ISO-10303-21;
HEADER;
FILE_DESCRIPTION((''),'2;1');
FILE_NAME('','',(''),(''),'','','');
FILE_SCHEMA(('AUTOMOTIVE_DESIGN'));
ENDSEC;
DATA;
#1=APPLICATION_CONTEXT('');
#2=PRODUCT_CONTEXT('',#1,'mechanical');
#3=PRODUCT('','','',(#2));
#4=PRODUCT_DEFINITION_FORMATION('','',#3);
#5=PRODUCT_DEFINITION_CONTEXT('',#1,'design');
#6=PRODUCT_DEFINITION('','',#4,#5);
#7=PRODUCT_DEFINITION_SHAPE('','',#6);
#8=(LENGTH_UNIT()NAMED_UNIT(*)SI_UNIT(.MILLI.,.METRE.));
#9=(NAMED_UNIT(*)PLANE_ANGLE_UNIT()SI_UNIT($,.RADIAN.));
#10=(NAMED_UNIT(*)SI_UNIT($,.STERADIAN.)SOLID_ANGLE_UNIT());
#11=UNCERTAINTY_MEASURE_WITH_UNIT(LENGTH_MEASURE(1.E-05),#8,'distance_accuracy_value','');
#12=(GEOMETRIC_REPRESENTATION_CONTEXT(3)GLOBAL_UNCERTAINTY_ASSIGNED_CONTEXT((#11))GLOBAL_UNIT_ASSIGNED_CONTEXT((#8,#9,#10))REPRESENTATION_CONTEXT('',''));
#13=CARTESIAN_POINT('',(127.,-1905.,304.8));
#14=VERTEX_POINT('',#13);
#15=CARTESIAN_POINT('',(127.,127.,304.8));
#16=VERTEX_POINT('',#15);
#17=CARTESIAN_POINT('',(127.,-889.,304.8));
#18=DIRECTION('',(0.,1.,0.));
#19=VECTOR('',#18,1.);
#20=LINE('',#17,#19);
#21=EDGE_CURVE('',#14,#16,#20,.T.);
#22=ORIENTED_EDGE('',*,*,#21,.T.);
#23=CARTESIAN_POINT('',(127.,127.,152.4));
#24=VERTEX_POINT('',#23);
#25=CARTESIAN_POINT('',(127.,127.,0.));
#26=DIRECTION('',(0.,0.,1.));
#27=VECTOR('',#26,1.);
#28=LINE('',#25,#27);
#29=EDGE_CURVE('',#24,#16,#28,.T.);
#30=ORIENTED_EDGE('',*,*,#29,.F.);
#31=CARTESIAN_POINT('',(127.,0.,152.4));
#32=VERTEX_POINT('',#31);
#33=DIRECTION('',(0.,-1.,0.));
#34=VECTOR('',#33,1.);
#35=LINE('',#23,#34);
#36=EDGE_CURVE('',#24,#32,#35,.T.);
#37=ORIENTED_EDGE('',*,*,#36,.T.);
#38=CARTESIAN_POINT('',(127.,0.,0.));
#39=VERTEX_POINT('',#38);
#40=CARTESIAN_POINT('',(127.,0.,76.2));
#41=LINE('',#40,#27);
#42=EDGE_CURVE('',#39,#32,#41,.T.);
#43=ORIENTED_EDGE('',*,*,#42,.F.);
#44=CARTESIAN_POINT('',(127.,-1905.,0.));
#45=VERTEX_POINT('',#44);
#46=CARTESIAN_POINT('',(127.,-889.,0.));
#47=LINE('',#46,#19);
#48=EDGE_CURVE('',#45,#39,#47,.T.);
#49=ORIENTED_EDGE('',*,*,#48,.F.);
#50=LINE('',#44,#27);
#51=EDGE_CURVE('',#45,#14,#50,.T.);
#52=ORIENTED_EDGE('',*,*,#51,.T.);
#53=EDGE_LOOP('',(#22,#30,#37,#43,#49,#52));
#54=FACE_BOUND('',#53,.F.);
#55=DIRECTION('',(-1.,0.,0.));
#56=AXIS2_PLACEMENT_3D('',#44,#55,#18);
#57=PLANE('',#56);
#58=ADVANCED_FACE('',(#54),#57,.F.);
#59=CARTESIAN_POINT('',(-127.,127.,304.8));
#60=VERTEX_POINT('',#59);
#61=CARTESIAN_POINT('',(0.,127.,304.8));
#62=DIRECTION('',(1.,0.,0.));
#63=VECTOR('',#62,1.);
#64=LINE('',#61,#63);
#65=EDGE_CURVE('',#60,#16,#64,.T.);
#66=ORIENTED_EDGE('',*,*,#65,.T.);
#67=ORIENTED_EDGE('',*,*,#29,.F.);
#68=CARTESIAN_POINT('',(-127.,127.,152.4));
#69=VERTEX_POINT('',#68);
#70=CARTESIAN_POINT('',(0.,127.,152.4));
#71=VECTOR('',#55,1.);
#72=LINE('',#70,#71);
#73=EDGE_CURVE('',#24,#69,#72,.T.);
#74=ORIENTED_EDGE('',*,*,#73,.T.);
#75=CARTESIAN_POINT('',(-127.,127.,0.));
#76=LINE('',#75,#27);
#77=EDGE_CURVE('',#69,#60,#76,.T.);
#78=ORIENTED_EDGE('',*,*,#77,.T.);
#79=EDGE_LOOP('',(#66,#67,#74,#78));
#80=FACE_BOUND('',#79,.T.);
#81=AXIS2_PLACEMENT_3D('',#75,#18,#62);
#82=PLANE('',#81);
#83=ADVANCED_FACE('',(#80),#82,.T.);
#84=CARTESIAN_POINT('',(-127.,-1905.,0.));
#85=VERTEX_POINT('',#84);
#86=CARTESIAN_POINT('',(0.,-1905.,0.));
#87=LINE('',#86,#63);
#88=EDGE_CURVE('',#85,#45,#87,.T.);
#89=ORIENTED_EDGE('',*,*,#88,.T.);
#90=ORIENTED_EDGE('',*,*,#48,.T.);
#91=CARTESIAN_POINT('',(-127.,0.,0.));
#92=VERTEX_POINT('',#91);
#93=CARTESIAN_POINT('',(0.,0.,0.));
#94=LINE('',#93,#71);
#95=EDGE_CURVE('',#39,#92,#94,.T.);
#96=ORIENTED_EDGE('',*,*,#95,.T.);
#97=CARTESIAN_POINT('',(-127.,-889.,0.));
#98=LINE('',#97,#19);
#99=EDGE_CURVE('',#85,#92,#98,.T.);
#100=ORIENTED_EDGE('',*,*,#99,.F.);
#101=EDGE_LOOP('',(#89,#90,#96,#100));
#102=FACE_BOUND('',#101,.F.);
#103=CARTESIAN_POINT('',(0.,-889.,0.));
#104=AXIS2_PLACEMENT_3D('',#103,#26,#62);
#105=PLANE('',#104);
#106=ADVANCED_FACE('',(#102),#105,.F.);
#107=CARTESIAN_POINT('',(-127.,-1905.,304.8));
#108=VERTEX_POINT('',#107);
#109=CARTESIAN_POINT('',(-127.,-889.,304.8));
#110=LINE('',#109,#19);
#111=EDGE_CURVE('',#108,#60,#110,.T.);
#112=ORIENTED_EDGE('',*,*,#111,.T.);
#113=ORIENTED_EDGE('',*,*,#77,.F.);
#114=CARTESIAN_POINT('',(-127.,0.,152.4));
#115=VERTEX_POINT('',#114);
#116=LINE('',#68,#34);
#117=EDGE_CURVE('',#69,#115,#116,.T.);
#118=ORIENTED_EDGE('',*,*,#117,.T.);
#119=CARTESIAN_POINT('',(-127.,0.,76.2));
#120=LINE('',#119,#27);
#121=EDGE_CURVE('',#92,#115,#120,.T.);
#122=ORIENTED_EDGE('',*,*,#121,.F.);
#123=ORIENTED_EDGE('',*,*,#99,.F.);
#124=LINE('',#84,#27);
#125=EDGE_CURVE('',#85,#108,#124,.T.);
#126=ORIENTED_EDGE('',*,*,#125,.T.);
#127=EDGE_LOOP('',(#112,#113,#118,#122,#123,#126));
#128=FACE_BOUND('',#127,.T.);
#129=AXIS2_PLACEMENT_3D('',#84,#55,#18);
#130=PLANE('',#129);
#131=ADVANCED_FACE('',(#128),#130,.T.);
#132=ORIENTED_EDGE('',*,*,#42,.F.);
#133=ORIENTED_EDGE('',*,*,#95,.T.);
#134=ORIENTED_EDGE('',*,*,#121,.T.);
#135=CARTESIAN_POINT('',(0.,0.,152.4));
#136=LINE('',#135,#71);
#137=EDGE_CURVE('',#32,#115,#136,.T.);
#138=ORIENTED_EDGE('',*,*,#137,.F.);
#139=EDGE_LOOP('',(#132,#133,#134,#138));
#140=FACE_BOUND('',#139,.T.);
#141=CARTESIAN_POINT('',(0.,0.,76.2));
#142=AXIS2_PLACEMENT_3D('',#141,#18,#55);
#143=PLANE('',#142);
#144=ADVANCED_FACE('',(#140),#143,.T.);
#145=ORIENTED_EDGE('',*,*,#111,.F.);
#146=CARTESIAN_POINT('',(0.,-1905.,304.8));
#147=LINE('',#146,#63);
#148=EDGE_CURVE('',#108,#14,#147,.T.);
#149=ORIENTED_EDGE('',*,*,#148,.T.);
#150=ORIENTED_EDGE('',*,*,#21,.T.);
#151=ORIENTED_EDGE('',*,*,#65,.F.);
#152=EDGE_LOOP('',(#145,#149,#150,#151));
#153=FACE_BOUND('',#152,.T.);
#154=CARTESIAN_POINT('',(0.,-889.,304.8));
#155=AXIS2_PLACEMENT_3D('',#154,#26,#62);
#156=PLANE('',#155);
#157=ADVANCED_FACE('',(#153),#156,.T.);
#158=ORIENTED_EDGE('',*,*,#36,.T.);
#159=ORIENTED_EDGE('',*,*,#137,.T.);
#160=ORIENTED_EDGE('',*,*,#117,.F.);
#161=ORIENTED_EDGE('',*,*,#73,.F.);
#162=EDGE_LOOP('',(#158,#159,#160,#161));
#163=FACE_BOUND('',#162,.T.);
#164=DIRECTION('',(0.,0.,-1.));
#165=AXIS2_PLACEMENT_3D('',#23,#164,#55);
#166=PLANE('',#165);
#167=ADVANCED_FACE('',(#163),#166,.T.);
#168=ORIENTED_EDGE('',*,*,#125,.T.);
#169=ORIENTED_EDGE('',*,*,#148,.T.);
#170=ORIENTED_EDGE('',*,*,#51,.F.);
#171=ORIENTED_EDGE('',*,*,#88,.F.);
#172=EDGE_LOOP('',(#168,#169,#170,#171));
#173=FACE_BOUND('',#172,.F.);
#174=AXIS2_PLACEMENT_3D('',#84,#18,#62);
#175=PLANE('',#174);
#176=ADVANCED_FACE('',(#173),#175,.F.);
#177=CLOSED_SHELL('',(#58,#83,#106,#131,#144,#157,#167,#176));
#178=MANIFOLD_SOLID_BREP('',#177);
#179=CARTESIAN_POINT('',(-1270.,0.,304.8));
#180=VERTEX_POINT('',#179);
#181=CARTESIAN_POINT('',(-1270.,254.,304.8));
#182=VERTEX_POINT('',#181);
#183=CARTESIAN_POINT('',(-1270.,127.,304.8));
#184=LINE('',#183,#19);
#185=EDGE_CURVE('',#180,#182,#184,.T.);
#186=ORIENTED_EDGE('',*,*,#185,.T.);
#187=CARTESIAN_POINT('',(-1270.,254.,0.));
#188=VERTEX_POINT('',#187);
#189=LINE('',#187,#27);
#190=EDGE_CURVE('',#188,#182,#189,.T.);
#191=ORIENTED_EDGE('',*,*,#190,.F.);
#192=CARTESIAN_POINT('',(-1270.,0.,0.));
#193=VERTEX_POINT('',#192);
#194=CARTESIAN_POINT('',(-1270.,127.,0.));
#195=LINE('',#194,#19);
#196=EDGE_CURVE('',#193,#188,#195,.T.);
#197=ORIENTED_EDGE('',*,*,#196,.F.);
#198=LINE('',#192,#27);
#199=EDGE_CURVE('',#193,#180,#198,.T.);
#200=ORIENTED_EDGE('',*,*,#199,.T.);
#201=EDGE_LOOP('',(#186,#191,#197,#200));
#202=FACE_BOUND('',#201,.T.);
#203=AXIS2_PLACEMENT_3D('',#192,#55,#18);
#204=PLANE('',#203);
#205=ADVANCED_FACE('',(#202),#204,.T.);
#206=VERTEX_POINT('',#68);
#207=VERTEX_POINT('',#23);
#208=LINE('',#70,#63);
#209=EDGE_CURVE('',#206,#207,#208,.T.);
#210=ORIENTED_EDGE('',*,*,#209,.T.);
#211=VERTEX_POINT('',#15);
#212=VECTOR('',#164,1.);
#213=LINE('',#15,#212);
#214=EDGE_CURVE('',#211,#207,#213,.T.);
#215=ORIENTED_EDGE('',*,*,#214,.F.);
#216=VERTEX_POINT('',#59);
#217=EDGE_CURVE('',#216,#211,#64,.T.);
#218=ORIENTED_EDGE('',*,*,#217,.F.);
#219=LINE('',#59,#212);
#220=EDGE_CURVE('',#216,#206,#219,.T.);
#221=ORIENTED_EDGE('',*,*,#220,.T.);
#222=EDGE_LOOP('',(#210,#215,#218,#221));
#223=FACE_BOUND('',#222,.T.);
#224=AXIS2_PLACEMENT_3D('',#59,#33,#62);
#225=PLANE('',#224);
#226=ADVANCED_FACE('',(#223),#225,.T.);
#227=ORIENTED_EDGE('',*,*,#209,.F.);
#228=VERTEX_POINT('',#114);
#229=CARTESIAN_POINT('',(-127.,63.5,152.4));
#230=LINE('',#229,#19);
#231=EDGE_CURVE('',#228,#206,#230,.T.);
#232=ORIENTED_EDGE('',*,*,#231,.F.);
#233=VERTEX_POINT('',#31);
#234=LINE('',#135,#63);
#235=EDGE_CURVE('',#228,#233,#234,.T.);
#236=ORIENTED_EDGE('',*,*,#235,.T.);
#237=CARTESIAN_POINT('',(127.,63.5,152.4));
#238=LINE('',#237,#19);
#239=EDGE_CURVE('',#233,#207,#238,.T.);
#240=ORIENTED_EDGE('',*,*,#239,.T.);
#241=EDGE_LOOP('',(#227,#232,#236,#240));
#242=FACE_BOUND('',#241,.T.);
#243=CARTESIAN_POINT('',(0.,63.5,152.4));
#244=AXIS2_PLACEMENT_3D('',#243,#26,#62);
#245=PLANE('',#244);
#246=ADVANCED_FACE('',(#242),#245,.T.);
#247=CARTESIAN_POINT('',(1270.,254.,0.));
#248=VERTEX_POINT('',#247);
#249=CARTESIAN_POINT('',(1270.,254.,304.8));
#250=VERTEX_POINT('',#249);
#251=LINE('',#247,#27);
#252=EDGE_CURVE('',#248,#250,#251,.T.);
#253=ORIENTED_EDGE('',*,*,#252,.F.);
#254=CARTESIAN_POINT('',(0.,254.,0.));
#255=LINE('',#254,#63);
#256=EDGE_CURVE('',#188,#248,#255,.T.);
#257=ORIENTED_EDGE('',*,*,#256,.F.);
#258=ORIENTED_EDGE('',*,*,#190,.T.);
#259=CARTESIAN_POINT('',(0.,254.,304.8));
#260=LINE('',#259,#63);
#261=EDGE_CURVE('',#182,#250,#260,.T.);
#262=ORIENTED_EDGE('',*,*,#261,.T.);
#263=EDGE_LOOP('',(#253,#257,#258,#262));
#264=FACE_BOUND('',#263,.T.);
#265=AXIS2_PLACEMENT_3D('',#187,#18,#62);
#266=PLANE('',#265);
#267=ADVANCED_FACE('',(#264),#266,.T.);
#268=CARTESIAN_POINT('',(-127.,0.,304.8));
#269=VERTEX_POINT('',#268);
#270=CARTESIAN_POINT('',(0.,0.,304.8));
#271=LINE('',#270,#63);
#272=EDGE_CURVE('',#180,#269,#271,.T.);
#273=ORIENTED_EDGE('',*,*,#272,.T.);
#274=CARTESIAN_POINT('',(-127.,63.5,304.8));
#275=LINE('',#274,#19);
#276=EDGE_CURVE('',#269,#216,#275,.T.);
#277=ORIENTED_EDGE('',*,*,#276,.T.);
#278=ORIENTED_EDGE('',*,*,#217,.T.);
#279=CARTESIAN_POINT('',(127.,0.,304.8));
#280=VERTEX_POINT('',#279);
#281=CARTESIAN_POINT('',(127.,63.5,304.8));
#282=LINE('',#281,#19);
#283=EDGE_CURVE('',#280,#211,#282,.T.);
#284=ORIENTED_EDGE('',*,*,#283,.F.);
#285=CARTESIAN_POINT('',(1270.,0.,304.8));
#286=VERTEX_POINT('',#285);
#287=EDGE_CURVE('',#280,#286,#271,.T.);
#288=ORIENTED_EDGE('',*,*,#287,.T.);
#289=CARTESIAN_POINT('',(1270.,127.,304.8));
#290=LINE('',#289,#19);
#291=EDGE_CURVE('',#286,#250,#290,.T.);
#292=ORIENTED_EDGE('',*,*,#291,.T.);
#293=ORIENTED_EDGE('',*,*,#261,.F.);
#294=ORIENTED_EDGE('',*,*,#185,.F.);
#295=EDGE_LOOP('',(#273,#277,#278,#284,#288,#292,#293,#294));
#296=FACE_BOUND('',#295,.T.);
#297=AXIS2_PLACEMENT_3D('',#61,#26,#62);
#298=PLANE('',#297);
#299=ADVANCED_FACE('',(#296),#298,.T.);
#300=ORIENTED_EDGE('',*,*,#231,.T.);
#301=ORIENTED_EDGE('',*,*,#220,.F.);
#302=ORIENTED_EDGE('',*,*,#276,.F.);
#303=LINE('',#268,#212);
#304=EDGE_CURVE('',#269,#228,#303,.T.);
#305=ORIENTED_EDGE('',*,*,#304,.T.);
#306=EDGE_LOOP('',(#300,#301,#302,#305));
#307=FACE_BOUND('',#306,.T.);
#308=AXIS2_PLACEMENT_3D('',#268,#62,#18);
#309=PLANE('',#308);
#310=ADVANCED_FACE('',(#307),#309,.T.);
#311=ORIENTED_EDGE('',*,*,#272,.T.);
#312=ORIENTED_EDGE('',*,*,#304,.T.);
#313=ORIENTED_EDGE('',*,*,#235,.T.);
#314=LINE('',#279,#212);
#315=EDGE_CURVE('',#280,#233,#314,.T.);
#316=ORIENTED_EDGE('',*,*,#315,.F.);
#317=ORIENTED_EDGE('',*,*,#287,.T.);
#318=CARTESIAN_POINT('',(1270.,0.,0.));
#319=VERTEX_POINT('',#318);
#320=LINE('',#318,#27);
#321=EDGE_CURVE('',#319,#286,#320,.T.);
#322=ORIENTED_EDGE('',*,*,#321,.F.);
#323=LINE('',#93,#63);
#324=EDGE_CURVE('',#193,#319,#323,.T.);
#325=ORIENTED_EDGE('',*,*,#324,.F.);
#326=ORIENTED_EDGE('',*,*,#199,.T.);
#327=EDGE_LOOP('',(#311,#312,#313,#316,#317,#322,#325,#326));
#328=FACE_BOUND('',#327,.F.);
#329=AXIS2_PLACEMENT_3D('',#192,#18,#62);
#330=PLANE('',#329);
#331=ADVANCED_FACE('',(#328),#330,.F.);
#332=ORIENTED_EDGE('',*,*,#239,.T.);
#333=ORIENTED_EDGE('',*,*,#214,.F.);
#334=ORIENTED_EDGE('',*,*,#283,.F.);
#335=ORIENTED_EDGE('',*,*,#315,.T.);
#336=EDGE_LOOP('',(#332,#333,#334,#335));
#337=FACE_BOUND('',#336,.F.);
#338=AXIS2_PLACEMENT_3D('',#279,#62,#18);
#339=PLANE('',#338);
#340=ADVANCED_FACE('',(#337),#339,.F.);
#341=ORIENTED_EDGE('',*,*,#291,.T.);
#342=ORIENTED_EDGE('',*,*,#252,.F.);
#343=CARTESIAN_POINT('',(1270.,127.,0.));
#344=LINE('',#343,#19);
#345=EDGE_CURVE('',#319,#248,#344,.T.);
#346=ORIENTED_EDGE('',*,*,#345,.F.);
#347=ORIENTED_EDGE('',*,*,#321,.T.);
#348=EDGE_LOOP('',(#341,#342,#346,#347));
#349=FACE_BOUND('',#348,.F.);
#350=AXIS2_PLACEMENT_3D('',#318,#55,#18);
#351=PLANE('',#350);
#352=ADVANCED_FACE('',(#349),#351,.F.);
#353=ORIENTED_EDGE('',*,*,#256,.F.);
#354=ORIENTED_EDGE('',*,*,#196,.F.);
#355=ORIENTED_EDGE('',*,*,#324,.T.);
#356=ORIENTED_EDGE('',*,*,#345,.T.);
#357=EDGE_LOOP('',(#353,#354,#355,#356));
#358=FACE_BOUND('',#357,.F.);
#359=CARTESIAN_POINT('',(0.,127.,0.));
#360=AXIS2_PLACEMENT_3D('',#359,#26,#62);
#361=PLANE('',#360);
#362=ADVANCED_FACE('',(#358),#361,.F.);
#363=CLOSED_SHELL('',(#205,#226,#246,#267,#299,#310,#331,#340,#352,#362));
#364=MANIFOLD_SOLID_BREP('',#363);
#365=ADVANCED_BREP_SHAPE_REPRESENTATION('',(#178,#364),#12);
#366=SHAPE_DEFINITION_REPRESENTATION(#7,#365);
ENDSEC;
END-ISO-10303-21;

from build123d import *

# Parameters (mm, degrees)
F0_W     = 2540
F0_H     = 254
F1_DEPTH = 304.8
F2_W     = 254
F2_H     = 127
F3_DEPTH = 152.4
F4_W     = 254
F4_H     = 2032
F5_DEPTH = 304.8
F6_W     = 254
F6_H     = 152.4
F7_DEPTH = 127


with BuildPart() as f1:
    # F0 (on Top) → F1 (new body)
    with BuildSketch(Plane.XY):
        with Locations((0, 127)):
            Rectangle(F0_W, F0_H)
    extrude(amount=F1_DEPTH)

    # F2 (on face) → F3 (cut)
    with BuildSketch(Plane.XY.offset(304.8)):
        with Locations((0, 63.5)):
            Rectangle(F2_W, F2_H)
    extrude(amount=-F3_DEPTH, mode=Mode.SUBTRACT)


with BuildPart() as f5:
    # F4 (on Top) → F5 (new body)
    with BuildSketch(Plane.XY):
        with Locations((0, -889)):
            Rectangle(F4_W, F4_H)
    extrude(amount=F5_DEPTH)

    # F6 (on face) → F7 (cut)
    with BuildSketch(Plane(origin=(0, 127, 0), x_dir=(-1, 0, 0), z_dir=(0, 1, 0))):
        with Locations((0, 76.2)):
            Rectangle(F6_W, F6_H)
    extrude(amount=-F7_DEPTH, mode=Mode.SUBTRACT)


solid = Compound([f1.part, f5.part])
